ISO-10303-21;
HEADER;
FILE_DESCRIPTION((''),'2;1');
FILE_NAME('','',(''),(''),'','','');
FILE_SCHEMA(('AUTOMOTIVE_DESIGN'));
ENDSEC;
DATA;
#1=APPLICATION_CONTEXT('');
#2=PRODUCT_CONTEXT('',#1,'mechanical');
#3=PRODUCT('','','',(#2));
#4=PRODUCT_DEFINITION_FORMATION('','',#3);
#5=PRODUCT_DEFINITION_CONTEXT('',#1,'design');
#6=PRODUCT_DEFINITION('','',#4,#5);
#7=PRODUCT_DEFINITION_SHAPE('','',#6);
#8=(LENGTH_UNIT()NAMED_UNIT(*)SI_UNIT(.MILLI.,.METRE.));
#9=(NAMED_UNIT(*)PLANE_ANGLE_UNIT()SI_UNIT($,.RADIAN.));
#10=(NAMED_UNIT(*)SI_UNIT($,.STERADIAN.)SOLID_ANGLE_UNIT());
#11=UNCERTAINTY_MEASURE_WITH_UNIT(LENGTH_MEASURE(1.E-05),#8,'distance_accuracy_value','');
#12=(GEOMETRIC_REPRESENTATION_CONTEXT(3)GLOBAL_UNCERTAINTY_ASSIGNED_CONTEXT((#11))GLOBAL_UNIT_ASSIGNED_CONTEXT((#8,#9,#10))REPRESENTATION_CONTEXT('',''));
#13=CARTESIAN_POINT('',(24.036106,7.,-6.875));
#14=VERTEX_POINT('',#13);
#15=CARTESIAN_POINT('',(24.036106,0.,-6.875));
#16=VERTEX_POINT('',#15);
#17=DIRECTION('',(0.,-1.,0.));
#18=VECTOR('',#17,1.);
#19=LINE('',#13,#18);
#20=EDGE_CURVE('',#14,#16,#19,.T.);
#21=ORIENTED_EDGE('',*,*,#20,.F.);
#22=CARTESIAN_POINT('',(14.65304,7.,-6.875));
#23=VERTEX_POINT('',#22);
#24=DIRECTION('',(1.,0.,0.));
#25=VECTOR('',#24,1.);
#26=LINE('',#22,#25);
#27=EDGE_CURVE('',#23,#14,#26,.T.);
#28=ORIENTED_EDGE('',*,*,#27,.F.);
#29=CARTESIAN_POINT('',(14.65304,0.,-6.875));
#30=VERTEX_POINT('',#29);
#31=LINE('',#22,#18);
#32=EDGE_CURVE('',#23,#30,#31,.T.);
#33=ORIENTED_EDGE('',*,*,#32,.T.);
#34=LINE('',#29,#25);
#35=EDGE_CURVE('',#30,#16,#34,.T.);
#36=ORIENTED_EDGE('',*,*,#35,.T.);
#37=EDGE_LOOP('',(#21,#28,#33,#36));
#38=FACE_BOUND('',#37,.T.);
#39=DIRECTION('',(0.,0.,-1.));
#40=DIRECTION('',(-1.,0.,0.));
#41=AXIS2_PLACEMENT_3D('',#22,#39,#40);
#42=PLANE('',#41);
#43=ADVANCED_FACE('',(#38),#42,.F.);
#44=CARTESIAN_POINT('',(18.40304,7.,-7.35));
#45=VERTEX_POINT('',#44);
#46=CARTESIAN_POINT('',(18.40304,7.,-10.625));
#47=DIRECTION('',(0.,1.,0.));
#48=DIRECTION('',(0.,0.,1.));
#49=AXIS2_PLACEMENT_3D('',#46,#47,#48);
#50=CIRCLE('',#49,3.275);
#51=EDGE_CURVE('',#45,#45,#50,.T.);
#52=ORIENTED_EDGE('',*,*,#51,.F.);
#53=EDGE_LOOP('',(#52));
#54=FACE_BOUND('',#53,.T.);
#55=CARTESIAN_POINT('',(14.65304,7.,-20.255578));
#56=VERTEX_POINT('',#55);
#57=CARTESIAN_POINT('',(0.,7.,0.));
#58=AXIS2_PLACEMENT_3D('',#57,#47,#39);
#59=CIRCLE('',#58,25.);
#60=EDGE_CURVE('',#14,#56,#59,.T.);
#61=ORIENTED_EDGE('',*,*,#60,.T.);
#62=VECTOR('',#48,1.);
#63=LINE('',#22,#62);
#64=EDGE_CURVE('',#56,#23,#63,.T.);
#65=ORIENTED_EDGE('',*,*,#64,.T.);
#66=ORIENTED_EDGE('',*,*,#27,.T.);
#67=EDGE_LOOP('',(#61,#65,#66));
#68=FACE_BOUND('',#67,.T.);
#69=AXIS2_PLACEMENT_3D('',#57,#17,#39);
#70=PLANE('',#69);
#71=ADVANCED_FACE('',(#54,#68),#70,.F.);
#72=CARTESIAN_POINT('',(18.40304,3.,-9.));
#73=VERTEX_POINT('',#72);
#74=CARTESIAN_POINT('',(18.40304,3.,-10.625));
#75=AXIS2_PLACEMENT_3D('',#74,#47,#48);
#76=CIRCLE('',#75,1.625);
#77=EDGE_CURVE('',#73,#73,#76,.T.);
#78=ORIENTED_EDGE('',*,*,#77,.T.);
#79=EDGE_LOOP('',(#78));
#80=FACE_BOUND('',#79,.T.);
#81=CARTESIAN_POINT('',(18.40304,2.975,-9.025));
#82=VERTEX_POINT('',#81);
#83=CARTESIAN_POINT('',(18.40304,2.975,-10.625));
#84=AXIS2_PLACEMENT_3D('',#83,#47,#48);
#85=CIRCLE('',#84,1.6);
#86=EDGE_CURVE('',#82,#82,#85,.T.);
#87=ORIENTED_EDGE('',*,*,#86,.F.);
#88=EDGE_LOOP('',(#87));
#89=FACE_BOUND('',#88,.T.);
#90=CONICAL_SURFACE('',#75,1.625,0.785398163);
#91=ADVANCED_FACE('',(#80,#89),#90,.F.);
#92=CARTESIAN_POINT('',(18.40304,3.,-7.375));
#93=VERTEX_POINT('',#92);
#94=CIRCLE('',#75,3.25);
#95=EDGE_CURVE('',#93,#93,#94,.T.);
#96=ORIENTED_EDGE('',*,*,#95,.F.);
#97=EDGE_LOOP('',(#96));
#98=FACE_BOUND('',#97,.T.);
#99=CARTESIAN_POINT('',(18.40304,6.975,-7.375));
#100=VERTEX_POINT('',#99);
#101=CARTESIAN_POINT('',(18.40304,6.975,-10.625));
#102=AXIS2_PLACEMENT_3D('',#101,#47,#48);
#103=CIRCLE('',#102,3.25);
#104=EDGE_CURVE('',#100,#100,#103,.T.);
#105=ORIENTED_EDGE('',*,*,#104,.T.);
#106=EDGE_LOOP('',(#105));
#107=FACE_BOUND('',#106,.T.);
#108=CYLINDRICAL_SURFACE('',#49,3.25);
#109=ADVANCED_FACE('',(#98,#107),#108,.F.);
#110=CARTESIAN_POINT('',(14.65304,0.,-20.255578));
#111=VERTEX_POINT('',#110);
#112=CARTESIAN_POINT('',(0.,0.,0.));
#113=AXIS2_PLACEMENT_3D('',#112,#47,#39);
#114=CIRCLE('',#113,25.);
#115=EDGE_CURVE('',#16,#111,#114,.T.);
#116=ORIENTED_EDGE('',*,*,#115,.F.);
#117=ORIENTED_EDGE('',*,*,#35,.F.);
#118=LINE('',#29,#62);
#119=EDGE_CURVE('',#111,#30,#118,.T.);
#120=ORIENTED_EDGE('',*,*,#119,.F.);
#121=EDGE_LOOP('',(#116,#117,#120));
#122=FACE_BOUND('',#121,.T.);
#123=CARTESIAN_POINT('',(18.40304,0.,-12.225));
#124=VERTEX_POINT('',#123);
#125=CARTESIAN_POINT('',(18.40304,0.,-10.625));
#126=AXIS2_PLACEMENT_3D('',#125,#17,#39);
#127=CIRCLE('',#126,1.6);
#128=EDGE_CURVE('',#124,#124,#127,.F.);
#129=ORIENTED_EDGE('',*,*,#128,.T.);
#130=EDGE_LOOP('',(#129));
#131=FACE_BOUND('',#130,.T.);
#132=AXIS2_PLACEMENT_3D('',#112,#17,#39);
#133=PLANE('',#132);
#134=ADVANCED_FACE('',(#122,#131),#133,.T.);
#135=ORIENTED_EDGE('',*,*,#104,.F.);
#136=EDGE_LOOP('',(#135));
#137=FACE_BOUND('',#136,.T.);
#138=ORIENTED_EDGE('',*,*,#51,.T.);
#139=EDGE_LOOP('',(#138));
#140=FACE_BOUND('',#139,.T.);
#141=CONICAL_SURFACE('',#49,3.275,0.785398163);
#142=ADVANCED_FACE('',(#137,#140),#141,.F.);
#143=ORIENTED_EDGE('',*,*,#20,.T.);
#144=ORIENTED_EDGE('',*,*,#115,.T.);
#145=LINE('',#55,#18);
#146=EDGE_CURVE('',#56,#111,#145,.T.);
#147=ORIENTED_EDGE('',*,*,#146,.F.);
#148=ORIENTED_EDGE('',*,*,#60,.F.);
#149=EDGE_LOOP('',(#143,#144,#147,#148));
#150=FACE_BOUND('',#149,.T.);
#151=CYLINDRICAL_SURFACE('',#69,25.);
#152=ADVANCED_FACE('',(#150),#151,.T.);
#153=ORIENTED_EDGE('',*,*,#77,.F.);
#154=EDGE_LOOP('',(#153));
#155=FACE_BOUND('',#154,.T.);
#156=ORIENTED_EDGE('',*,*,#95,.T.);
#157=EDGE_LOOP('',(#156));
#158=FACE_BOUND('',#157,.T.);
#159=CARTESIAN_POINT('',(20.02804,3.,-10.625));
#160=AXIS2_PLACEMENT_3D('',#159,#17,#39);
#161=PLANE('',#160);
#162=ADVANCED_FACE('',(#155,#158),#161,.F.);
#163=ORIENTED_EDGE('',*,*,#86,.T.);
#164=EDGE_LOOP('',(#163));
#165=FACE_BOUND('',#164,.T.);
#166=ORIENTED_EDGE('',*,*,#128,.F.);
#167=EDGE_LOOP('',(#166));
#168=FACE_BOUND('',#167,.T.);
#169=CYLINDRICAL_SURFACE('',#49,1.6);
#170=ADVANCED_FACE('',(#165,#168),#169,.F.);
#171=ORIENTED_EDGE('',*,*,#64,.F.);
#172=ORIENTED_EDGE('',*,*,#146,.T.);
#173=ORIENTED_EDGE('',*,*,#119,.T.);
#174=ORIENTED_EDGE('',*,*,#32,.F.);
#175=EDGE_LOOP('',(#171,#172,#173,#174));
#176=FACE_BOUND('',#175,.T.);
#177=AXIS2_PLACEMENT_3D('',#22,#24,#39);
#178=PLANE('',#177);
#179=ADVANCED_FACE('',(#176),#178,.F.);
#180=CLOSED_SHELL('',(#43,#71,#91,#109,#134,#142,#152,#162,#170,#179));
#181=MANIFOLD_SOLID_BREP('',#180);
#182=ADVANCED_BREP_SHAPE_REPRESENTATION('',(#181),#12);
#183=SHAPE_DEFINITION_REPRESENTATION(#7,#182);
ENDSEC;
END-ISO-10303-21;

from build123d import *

# Parameters (mm, degrees)
BOSS_EXTRUDE2_DEPTH = 7


# Read off the part's stored shape, not the designer's step: CBORE for M3 SHCS1
with BuildPart() as part:
    # Sketch1 → Boss-Extrude2 (new body)
    with BuildSketch(Plane(origin=(0, 0, 0), x_dir=(1, 0, 0), z_dir=(0, 1, 0))):
        with BuildLine():
            Line((14.65303983, 6.875), (24.036105654, 6.875))
            ThreePointArc((24.036105654, 6.875), (20.468816741, 14.353659506), (14.65303983, 20.255577596))
            Line((14.65303983, 20.255577596), (14.65303983, 6.875))
        make_face()
    extrude(amount=BOSS_EXTRUDE2_DEPTH)

    # CBORE for M3 SHCS1 outline → CBORE for M3 SHCS1 (revolve, cut)
    with BuildSketch(Plane(origin=(18.40303983, 0, -10.625), x_dir=(1, 0, 0), z_dir=(0, 0, 1))):
        Polygon((0, 0), (1.6, 0), (1.6, 2.975), (1.625, 3), (3.25, 3), (3.25, 6.975), (3.275, 7), (0, 7), align=None)
    revolve(axis=Axis((18.40303983, 0, -10.625), (0, 1, 0)), mode=Mode.SUBTRACT)


solid = part.part
